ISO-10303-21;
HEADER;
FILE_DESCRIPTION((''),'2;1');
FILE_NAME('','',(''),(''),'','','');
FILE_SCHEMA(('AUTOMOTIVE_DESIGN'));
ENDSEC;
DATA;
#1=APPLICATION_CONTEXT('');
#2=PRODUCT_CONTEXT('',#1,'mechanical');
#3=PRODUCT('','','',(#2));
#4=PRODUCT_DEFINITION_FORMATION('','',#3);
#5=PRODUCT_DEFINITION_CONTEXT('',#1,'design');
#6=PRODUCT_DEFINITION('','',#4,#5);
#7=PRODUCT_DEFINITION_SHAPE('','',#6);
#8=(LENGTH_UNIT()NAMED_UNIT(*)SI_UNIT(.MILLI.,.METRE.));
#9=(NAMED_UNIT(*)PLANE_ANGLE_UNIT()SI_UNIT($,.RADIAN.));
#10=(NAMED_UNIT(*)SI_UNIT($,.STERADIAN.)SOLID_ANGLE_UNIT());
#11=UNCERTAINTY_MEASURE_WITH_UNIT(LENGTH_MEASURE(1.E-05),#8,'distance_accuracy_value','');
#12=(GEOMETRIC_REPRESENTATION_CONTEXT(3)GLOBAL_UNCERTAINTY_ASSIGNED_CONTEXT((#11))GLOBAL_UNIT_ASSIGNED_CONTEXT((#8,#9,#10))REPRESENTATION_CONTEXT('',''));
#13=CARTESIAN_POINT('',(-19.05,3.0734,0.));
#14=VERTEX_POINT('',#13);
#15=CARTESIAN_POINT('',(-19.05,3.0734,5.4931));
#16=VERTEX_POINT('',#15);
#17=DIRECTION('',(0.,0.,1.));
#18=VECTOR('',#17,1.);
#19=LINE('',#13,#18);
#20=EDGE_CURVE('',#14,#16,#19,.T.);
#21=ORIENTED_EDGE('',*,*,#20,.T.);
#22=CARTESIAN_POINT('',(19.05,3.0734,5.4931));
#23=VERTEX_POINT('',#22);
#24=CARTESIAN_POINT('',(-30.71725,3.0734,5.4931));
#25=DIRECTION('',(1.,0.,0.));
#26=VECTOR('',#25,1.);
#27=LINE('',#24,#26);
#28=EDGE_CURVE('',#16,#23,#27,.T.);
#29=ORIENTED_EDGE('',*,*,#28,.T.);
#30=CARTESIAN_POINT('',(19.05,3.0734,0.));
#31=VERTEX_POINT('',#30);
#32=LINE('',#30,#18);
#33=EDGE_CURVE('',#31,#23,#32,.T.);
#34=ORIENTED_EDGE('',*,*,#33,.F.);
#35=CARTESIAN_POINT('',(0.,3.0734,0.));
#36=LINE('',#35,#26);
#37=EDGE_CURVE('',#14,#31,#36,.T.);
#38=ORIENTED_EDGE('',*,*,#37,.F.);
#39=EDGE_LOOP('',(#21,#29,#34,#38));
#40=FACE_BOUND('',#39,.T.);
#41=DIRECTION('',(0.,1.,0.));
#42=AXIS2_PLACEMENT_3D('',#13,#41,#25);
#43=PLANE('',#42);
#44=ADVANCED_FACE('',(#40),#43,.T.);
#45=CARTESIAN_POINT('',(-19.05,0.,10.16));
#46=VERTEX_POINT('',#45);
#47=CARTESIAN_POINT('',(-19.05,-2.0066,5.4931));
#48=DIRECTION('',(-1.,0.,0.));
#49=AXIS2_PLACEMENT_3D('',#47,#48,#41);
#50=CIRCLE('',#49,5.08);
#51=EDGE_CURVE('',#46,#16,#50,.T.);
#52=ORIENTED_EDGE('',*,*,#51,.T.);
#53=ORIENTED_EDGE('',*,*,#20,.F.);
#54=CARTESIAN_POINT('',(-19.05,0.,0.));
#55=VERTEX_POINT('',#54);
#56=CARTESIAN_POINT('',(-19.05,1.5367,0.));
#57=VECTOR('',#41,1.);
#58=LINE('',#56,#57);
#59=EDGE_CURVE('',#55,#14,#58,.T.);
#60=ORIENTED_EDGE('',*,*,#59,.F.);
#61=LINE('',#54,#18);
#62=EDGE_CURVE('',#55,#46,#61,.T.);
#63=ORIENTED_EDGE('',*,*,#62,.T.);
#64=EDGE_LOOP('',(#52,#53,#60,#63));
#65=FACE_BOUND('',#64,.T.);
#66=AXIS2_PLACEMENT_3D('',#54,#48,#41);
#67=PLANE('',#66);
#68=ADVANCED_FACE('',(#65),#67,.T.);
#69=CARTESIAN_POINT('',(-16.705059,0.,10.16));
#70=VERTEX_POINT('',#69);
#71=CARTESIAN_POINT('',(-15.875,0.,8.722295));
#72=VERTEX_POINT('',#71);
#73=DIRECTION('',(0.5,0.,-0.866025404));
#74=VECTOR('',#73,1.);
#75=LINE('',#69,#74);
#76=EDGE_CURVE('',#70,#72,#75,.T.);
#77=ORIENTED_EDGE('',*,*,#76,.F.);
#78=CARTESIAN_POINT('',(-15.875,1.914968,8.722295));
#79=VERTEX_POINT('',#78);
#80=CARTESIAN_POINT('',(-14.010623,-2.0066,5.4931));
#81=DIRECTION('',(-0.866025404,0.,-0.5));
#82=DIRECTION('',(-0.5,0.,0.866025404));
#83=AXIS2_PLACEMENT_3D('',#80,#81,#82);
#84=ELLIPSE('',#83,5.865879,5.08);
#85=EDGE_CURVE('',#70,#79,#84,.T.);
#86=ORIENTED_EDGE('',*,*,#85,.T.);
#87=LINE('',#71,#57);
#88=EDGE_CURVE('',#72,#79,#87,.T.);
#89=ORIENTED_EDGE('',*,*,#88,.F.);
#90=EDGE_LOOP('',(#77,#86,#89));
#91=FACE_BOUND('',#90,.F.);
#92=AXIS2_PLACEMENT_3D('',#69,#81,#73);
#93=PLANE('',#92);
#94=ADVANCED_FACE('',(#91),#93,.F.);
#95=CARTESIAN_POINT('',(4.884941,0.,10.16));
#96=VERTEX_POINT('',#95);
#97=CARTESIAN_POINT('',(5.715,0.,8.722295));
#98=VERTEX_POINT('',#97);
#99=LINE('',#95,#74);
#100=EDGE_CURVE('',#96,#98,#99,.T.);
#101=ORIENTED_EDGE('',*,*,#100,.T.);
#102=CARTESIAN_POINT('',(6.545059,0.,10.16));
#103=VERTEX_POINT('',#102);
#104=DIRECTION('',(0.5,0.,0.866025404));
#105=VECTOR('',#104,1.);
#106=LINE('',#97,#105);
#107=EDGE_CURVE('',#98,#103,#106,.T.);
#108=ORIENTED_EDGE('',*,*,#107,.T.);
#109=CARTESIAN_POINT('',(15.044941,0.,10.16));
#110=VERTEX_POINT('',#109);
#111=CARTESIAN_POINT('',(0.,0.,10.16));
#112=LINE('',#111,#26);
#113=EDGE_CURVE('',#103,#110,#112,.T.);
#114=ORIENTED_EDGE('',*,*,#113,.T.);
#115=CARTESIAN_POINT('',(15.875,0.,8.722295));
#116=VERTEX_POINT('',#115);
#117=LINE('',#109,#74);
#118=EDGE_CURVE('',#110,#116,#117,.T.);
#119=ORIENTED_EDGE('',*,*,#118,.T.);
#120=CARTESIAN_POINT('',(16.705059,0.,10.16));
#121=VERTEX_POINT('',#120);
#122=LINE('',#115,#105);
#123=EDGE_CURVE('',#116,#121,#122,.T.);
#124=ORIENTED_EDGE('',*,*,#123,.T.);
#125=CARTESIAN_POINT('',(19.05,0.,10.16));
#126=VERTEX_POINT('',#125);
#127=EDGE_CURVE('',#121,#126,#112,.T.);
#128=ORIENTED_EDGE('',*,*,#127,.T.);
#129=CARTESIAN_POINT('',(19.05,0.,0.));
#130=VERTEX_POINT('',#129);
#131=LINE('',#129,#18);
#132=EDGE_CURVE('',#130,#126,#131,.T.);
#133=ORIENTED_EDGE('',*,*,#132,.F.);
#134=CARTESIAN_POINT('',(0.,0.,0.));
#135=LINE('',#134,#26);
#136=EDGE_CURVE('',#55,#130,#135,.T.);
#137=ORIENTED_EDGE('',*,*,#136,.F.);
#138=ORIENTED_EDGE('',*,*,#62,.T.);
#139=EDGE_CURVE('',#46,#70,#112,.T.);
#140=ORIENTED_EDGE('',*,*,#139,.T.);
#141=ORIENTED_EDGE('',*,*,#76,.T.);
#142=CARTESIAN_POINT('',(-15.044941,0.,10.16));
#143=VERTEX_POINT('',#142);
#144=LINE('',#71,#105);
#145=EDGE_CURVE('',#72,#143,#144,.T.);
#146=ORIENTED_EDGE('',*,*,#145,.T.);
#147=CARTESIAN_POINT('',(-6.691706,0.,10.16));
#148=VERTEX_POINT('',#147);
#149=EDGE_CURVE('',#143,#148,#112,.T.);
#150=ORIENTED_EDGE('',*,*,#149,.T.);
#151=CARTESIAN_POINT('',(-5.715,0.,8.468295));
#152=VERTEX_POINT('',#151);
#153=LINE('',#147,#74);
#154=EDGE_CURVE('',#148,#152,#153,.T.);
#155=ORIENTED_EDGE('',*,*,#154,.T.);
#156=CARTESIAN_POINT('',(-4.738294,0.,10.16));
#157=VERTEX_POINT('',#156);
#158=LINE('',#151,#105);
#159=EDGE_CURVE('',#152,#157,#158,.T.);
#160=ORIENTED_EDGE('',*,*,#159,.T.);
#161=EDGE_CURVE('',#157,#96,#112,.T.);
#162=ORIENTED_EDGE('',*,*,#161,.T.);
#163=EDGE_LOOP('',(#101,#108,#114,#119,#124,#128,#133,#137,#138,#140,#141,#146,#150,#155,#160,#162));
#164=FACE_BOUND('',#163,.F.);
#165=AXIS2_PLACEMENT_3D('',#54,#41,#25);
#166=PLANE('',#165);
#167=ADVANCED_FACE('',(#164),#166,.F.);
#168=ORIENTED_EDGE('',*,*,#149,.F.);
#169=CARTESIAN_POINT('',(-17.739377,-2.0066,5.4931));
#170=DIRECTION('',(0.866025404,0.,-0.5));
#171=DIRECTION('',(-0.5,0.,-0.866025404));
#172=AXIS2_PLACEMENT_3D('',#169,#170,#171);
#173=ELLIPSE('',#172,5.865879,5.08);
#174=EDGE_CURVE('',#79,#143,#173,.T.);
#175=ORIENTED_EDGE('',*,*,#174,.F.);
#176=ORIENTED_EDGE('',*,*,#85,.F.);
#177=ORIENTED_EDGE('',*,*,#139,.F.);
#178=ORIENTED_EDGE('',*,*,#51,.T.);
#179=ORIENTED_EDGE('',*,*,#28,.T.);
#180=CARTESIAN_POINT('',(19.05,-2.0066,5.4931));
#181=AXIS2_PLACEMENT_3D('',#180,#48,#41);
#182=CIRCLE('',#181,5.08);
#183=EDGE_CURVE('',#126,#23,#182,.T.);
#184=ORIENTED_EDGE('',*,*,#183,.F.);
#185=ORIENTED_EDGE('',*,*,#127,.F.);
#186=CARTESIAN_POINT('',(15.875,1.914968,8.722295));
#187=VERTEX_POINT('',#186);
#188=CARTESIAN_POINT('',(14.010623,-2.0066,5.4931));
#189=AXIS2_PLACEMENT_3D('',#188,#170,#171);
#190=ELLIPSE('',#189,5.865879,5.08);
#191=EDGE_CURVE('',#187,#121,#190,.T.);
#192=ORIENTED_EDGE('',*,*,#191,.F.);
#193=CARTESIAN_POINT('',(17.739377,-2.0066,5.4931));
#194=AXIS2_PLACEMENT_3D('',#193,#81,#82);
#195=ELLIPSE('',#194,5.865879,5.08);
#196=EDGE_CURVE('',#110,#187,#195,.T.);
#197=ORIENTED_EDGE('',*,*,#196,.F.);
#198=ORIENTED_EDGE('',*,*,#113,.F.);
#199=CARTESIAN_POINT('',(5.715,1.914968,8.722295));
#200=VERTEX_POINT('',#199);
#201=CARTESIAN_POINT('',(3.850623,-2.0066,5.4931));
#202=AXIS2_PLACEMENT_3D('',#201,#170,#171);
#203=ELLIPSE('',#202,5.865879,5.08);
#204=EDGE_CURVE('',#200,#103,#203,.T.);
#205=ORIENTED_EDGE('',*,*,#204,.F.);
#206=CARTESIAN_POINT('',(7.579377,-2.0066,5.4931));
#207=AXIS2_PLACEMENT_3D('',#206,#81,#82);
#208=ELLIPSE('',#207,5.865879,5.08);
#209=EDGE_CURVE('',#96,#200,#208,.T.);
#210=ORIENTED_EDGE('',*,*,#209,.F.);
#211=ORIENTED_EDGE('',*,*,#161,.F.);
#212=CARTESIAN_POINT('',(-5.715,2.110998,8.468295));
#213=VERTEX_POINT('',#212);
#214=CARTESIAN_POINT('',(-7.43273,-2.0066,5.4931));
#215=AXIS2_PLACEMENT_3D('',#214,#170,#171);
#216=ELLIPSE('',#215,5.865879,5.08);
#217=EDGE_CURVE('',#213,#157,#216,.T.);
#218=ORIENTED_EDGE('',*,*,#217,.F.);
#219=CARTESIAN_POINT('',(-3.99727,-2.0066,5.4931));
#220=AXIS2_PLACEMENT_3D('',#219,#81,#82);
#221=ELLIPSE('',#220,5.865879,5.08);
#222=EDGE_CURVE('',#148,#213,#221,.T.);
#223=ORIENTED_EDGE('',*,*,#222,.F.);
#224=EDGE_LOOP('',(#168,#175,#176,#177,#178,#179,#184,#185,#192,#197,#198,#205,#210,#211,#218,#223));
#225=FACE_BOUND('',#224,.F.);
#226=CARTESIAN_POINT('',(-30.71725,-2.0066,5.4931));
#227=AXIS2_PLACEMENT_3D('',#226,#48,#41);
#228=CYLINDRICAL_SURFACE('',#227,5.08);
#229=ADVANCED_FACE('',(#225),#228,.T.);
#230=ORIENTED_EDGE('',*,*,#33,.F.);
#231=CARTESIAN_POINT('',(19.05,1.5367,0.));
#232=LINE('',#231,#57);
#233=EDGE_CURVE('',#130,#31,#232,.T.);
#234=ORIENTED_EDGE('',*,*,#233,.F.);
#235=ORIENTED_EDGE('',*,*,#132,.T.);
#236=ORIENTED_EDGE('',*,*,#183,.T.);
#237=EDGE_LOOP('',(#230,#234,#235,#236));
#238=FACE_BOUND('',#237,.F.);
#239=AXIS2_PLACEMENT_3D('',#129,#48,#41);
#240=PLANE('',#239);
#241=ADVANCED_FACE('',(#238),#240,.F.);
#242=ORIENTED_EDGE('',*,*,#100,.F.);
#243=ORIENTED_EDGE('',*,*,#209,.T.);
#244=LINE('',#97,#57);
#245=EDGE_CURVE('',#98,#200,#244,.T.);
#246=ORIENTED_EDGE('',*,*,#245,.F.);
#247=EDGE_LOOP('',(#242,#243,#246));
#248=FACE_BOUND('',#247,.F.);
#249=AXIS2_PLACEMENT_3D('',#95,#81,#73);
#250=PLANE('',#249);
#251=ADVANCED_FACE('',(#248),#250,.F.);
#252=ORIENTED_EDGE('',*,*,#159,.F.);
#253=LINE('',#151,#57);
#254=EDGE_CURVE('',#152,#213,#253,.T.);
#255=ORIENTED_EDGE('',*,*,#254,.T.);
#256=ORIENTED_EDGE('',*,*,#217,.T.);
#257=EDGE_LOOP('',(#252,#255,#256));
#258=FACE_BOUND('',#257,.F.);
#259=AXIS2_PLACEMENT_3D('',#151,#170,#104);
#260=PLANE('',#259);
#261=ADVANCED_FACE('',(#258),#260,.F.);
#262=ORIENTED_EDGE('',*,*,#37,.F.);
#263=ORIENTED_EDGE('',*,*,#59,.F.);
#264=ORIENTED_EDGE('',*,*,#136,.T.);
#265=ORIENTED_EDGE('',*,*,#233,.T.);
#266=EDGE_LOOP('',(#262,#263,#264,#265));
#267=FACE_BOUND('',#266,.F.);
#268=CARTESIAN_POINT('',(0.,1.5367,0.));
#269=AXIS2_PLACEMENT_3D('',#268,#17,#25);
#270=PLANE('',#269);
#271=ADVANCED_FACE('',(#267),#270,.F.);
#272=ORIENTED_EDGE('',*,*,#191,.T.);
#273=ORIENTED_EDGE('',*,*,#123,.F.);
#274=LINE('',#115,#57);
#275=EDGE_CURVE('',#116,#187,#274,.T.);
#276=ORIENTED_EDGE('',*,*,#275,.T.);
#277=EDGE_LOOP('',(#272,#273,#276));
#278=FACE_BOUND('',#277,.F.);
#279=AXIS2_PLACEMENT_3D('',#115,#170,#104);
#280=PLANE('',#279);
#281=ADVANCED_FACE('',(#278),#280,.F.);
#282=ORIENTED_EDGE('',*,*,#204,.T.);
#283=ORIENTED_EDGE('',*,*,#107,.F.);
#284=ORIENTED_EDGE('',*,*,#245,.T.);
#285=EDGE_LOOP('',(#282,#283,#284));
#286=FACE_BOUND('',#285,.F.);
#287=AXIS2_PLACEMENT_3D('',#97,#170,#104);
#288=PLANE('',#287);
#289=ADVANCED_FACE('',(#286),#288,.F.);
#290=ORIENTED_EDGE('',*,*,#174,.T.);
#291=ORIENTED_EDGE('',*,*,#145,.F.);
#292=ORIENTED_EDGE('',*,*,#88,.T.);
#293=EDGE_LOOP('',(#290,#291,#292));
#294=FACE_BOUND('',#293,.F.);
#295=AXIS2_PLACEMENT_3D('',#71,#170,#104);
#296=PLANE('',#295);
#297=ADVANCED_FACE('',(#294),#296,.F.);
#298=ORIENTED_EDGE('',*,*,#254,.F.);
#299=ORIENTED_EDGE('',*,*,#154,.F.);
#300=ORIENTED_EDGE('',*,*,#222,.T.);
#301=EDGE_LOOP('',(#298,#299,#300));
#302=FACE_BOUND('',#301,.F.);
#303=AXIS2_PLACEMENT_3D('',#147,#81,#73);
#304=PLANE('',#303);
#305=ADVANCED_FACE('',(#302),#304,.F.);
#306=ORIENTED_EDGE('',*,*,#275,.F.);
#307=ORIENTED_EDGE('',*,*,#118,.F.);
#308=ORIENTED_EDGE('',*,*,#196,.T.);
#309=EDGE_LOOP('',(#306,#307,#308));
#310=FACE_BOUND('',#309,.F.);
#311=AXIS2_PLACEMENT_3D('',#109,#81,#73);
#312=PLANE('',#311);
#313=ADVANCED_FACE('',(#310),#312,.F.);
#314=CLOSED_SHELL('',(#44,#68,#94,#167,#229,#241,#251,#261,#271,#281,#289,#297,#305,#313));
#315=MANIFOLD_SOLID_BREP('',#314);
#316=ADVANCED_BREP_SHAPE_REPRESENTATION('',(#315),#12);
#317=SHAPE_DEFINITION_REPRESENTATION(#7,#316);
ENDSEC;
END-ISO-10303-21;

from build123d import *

# Parameters (mm, degrees)
F0_W        = 38.1
F0_H        = 3.0734
F1_DEPTH    = 10.16
F3_T1_DEPTH = 61.4345004446
F4_DEPTH    = 25.4


# Not quite as in the source:
# - a fillet or chamfer that OpenCascade refuses, or shapes differently, is made with other operations: its cross-section is extruded or revolved along the edge and cut away or added


with BuildPart() as f1:
    # F0 (on Top) → F1 (new body)
    with BuildSketch(Plane.XY):
        with Locations((0, 1.5367)):
            Rectangle(F0_W, F0_H)
    extrude(amount=F1_DEPTH)

    # F3: fillet of radius 5.08 on 1 edges, made by hand

    # F3_s2 → F3_t1 (cut)
    with BuildSketch(Plane.YZ.offset(-30.7172502223)):
        with BuildLine():
            ThreePointArc((3.0734, 5.4930999111), (2.2360364445, 8.2870999111), (0, 10.16))
            Line((0, 10.16), (3.0734, 10.16))
            Line((3.0734, 10.16), (3.0734, 5.4930999111))
        make_face()
    extrude(amount=F3_T1_DEPTH, mode=Mode.SUBTRACT)

    # F2 (on face) → F4 (cut)
    with BuildSketch(Plane.XZ):
        Polygon((-15.875, 8.7222954744), (-15.0449409051, 10.16), (-16.7050590949, 10.16), align=None)
        Polygon((-4.7382939367, 10.16), (-6.6917060633, 10.16), (-5.715, 8.4682954744), align=None)
        Polygon((6.5450590949, 10.16), (4.8849409051, 10.16), (5.715, 8.7222954744), align=None)
        Polygon((16.7050590949, 10.16), (15.0449409051, 10.16), (15.875, 8.7222954744), align=None)
    extrude(amount=-F4_DEPTH, mode=Mode.SUBTRACT)


solid = f1.part
